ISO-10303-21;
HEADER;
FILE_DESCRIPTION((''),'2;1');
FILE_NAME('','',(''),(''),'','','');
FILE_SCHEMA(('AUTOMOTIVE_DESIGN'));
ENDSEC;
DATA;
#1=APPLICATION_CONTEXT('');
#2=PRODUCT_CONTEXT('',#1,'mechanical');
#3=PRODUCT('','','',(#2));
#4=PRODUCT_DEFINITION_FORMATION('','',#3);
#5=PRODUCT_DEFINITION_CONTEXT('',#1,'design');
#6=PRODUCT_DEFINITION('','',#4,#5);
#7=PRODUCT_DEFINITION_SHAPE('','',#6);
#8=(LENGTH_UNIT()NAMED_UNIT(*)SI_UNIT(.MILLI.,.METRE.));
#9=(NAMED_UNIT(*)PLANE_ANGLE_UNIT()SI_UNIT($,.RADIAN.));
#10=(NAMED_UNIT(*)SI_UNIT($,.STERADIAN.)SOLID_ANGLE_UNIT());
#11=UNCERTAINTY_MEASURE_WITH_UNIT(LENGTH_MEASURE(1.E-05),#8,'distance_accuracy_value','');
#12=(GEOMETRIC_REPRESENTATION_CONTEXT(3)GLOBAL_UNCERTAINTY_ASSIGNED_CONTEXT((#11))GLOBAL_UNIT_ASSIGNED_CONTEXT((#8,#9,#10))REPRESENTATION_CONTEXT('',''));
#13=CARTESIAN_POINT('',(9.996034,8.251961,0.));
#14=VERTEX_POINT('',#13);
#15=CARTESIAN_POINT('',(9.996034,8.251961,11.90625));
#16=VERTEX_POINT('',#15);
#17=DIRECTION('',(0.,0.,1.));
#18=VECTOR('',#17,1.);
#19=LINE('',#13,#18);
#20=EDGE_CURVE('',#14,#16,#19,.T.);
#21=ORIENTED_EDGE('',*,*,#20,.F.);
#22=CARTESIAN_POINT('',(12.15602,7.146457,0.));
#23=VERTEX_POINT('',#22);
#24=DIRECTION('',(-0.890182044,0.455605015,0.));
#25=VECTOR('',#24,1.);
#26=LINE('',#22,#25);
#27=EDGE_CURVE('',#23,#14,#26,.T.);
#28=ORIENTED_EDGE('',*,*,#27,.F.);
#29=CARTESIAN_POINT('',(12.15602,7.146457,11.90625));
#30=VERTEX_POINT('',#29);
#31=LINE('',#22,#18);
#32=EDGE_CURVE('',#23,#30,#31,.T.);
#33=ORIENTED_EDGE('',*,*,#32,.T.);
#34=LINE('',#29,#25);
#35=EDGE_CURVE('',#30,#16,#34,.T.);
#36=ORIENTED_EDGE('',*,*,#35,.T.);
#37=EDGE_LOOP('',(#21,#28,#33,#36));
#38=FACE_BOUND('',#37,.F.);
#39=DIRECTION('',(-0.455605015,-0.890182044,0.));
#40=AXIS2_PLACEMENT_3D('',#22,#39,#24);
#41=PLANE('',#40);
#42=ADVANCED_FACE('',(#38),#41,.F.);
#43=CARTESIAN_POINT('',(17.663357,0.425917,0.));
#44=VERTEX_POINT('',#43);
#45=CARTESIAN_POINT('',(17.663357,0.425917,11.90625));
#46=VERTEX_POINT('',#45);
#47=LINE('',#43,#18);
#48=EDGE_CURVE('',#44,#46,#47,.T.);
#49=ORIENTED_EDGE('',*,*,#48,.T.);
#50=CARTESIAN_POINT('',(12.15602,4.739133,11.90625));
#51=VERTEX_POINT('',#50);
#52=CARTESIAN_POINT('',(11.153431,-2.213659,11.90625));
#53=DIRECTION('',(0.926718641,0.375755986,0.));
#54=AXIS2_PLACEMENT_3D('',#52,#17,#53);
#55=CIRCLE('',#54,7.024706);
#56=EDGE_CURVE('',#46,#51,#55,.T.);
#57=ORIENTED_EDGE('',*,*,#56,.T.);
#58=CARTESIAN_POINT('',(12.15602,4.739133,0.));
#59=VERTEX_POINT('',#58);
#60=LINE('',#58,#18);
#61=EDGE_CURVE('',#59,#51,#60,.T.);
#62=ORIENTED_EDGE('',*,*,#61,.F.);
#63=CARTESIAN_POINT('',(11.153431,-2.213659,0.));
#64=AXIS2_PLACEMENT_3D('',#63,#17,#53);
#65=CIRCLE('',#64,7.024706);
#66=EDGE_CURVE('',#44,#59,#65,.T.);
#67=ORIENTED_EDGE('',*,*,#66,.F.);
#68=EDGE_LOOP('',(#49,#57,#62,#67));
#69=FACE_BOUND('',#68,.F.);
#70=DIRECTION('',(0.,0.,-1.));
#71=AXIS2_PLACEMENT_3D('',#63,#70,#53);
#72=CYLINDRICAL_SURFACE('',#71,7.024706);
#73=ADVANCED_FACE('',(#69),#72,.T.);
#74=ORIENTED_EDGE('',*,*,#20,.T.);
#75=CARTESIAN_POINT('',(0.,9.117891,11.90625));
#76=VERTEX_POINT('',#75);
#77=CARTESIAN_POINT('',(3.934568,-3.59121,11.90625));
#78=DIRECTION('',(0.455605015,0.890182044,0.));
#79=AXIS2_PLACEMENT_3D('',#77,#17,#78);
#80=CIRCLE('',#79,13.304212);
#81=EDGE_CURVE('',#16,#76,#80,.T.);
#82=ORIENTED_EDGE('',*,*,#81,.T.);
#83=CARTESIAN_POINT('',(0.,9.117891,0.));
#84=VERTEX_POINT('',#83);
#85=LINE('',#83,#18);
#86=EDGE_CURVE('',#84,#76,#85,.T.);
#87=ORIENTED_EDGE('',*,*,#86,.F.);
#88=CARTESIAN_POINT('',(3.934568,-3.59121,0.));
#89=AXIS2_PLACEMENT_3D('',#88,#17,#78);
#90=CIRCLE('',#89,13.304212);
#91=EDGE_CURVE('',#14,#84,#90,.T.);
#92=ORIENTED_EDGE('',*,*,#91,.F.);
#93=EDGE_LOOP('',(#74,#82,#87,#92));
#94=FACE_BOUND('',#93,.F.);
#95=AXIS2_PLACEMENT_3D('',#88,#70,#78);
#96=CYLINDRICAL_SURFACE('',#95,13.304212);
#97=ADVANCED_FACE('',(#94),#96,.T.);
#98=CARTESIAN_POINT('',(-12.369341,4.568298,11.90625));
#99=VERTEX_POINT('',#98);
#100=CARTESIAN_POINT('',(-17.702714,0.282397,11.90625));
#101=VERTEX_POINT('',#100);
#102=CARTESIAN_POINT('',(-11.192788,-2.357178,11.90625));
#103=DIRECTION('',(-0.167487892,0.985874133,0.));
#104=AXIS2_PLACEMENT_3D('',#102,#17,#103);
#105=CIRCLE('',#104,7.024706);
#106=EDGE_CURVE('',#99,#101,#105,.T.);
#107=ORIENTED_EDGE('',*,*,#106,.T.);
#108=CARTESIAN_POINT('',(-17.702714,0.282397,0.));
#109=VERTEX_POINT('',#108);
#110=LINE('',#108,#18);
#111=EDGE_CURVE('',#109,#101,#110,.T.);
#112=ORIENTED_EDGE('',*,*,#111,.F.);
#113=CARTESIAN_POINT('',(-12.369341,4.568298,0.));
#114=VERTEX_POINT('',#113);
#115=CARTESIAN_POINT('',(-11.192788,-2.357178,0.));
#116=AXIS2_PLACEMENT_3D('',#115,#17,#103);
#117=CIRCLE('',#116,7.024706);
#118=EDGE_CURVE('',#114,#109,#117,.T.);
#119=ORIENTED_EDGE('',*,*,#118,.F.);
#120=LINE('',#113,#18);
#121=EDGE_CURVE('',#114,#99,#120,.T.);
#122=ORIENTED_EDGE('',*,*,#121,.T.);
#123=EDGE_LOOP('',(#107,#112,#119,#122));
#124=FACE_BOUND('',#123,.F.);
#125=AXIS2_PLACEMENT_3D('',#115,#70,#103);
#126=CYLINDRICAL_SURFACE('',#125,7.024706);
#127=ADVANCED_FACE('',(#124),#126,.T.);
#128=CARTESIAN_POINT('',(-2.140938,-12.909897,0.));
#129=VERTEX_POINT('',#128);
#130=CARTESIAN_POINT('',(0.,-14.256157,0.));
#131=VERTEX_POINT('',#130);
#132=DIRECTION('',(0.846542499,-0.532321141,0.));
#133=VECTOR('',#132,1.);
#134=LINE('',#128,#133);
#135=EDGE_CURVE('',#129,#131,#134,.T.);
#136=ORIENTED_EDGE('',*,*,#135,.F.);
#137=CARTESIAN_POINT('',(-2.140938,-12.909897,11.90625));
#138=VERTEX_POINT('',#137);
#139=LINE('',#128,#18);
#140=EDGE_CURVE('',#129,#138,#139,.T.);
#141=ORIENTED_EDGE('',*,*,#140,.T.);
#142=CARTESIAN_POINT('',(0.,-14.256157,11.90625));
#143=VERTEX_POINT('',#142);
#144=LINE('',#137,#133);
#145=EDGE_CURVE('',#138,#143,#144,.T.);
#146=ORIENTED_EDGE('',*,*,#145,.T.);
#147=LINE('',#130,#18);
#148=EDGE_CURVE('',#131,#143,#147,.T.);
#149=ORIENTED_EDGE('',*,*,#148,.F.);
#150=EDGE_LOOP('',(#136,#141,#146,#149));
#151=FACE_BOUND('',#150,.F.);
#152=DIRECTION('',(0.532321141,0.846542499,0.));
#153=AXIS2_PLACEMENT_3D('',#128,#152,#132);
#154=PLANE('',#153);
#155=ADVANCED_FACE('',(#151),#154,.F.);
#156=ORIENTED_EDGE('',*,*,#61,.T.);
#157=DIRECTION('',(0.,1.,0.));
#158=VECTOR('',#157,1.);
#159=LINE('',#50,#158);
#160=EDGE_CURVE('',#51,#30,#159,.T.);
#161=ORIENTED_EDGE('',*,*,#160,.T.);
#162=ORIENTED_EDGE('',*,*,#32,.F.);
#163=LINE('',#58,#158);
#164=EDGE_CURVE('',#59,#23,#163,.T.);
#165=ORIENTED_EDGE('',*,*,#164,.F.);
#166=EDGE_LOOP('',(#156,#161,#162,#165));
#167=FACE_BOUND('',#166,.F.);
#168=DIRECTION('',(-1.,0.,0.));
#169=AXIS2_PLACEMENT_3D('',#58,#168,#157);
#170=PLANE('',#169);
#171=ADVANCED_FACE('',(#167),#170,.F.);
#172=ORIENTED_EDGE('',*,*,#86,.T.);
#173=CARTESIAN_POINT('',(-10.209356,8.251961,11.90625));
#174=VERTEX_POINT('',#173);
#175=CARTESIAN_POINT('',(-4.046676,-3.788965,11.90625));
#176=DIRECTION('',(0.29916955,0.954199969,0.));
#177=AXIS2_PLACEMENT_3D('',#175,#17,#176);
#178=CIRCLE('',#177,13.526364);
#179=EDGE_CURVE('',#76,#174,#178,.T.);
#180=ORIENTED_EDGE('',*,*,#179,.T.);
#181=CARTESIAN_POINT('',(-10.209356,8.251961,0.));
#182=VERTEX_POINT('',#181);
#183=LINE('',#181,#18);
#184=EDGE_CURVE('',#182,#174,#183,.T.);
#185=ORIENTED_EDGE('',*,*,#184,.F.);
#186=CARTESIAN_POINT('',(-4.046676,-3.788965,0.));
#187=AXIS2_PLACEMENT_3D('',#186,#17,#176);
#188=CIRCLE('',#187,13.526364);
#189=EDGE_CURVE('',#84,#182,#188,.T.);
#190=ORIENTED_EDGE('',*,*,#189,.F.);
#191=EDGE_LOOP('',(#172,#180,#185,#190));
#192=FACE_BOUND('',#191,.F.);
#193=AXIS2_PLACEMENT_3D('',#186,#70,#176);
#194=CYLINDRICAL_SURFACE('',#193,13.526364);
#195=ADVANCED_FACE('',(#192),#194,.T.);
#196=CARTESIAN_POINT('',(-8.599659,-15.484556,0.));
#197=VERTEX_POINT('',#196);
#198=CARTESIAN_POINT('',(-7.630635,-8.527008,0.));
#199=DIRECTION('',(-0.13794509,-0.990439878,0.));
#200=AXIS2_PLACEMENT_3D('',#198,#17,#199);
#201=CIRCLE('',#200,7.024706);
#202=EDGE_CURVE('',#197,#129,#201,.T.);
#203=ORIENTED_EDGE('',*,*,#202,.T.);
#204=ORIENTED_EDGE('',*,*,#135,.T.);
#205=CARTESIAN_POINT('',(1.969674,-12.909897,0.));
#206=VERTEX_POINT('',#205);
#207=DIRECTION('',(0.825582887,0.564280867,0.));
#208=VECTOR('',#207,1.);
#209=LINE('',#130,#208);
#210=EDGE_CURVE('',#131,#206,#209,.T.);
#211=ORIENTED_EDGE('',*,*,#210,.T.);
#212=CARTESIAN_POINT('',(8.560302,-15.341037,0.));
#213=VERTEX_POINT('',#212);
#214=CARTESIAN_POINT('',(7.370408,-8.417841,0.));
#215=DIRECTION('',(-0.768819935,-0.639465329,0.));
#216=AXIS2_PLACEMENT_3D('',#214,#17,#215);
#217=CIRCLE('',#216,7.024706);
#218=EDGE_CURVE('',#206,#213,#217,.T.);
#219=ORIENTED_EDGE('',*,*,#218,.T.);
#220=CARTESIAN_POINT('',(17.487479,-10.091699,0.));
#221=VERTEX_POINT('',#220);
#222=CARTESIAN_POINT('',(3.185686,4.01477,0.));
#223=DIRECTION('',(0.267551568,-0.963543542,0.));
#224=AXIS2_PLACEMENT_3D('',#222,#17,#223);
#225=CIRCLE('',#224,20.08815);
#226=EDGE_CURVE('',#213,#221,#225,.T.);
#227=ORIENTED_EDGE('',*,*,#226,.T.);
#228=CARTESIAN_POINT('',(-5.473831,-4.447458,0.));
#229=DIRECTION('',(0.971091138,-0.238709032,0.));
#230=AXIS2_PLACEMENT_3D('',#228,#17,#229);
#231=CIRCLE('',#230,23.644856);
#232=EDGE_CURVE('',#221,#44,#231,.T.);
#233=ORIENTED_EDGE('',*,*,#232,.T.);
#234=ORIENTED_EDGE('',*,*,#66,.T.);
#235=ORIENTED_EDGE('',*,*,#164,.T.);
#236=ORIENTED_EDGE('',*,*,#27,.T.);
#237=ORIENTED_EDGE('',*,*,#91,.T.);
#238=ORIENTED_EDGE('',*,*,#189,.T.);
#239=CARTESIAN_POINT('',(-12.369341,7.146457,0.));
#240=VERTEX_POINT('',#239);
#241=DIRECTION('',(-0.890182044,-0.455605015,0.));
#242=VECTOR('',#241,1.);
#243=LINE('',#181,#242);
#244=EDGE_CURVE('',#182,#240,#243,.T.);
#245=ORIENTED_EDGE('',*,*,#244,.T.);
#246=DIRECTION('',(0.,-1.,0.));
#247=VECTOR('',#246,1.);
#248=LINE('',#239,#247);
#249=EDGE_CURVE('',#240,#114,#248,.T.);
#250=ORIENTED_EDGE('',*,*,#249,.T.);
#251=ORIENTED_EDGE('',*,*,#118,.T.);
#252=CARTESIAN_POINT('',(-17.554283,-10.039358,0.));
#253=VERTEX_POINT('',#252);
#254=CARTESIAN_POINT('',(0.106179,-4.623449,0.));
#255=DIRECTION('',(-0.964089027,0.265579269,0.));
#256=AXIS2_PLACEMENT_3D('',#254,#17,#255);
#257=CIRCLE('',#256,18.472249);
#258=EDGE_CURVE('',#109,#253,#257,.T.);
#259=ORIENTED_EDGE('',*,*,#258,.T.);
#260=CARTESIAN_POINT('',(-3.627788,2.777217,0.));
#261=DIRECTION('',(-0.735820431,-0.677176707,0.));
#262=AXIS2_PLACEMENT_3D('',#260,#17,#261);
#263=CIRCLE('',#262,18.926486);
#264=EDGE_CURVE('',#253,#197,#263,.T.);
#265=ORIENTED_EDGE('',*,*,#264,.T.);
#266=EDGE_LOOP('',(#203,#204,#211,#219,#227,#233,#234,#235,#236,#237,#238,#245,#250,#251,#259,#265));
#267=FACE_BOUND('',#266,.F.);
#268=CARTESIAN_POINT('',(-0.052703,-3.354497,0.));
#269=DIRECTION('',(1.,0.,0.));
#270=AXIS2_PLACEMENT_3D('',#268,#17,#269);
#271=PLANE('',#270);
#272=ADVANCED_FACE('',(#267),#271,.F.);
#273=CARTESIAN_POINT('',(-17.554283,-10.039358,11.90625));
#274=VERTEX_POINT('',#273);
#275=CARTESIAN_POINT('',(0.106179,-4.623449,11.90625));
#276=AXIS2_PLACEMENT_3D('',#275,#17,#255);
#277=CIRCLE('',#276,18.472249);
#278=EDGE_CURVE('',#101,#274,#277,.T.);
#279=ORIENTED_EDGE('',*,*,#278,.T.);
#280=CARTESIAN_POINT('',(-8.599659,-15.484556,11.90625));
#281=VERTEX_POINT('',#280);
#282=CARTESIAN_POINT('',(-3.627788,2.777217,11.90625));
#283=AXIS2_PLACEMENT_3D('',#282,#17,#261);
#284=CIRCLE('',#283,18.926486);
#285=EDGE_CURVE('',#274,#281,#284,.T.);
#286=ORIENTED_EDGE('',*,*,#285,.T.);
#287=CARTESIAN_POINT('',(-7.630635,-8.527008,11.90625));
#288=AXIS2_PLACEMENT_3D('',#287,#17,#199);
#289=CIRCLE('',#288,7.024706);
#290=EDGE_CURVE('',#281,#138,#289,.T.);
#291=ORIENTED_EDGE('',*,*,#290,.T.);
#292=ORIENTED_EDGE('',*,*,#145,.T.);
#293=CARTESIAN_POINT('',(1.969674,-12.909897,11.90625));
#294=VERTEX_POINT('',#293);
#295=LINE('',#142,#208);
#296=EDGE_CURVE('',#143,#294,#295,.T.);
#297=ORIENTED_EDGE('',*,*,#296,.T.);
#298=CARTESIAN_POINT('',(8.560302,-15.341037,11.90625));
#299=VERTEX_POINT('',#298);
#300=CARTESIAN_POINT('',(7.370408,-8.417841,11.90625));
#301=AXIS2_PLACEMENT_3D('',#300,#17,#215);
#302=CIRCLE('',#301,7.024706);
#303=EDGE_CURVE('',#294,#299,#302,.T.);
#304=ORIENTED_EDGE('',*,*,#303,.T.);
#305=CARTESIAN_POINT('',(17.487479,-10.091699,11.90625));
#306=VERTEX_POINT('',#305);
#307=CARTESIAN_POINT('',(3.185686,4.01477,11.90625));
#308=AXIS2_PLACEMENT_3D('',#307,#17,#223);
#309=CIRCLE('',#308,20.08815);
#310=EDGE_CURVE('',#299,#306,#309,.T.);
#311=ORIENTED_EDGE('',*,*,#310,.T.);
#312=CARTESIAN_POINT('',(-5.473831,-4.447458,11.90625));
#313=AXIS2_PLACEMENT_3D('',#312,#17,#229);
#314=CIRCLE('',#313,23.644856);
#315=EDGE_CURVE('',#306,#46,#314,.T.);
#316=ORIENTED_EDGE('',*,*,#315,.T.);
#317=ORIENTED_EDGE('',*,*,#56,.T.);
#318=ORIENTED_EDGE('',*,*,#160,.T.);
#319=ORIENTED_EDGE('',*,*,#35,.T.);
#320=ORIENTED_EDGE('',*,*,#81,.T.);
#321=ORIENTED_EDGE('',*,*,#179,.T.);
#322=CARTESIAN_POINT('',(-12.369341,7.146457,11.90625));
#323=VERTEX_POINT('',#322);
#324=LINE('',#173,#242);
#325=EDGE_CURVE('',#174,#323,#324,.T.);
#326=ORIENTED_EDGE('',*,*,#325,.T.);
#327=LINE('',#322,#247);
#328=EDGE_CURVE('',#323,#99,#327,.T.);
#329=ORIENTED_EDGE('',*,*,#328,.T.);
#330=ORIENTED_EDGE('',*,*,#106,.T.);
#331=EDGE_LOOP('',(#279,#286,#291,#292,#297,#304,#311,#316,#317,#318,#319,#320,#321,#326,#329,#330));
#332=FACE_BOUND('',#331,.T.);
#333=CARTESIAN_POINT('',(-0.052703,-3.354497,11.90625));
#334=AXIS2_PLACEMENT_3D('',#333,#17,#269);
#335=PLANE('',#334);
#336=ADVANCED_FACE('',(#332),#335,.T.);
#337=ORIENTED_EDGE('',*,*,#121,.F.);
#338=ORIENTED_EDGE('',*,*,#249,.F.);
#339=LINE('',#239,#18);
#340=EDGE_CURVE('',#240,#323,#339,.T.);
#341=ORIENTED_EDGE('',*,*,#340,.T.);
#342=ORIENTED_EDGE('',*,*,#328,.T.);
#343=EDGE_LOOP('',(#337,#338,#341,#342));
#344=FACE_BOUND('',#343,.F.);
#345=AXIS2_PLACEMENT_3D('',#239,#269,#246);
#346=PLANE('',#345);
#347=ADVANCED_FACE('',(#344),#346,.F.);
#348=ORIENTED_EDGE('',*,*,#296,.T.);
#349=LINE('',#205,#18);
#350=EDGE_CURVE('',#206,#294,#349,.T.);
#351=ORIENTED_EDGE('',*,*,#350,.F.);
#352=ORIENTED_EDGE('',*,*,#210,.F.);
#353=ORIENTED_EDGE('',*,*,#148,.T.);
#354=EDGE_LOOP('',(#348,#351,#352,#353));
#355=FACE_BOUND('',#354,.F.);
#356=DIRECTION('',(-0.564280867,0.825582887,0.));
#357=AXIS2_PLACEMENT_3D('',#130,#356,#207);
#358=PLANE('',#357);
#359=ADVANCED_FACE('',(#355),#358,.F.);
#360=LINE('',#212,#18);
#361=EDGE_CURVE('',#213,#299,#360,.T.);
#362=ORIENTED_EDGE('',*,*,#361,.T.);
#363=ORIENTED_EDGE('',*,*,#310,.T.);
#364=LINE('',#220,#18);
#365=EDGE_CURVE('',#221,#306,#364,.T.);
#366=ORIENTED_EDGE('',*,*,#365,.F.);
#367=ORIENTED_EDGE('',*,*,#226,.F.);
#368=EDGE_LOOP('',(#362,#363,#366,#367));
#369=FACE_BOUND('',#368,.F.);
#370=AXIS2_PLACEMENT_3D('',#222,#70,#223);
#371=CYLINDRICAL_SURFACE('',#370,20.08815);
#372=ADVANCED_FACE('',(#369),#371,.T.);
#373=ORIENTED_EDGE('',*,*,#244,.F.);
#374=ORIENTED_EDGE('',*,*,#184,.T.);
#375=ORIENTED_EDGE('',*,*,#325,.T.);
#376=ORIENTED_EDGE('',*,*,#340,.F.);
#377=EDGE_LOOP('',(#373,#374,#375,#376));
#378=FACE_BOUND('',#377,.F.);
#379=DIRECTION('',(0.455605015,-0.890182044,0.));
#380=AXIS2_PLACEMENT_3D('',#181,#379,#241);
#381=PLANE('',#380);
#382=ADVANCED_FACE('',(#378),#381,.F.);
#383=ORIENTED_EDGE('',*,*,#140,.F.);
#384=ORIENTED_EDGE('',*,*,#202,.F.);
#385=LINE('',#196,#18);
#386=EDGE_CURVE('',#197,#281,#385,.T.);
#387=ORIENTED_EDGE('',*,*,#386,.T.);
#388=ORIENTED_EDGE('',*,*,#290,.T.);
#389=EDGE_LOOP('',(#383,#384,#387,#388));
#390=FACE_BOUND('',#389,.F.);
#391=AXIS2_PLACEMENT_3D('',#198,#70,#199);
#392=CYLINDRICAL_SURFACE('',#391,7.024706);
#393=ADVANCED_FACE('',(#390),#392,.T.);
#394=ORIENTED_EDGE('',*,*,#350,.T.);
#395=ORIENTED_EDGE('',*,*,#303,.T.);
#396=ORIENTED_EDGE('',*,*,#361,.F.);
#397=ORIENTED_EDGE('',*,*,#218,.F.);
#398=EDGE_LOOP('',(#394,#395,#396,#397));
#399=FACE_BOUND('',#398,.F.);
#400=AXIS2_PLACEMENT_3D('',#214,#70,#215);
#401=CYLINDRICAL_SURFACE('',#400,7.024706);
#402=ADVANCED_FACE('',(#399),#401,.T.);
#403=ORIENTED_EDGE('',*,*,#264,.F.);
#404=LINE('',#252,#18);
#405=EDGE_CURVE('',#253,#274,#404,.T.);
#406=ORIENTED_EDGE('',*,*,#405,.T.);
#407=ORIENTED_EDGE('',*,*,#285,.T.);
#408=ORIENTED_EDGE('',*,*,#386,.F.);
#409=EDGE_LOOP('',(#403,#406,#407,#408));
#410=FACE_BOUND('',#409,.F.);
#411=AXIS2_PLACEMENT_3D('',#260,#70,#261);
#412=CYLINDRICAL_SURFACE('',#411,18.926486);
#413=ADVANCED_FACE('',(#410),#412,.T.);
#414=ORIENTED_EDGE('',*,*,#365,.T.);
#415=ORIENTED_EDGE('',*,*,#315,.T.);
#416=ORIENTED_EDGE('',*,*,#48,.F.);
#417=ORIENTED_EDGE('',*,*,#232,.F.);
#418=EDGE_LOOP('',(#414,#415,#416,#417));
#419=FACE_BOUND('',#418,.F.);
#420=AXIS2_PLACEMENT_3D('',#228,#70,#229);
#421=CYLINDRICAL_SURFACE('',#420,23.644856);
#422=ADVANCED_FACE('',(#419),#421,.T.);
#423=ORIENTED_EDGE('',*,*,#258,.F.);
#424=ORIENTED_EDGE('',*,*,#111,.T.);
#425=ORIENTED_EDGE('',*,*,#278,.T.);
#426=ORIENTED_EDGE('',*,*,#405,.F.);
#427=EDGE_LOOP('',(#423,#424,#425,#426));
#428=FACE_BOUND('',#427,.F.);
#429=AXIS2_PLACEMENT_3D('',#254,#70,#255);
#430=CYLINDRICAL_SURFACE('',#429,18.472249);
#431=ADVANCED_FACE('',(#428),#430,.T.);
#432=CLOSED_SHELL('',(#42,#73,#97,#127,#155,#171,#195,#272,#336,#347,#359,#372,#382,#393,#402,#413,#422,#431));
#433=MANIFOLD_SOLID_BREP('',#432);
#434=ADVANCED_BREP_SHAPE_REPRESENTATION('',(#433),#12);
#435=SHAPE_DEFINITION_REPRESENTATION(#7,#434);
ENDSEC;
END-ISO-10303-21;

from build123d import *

# Parameters (mm, degrees)
F1_DEPTH = 11.90625


# Not quite as in the source:
# - a length typed as a fraction of an inch, garbled in the dataset ("3 / 203.2 mm" for 3/8 in), is restored


with BuildPart() as f1:
    # F0 (on Top) → F1 (new body)
    with BuildSketch(Plane.XY):
        with BuildLine():
            ThreePointArc((0, 9.1178910807), (-5.1898410508, 9.6890057882), (-10.2093555033, 8.2519613206))
            Line((-10.2093555033, 8.2519613206), (-12.369341217, 7.1464567445))
            Line((-12.369341217, 7.1464567445), (-12.369341217, 4.6386048198))
            Line((-12.369341217, 4.6386048198), (-12.369341217, 4.5682978211))
            ThreePointArc((-12.369341217, 4.5682978211), (-15.5930977879, 3.1185654947), (-17.7027139134, 0.2823972963))
            ThreePointArc((-17.7027139134, 0.2823972963), (-18.3641606661, -4.889059653), (-17.5542831421, -10.0393583998))
            ThreePointArc((-17.5542831421, -10.0393583998), (-13.4613837791, -13.3941238354), (-8.5996589687, -15.484556372))
            ThreePointArc((-8.5996589687, -15.484556372), (-5.0294162563, -15.0523544446), (-2.1409380715, -12.9098966718))
            Line((-2.1409380715, -12.9098966718), (0, -14.2561570176))
            Line((0, -14.2561570176), (1.9696742658, -12.9098966718))
            ThreePointArc((1.9696742658, -12.9098966718), (4.9392756736, -15.0084468105), (8.560301624, -15.3410370587))
            ThreePointArc((8.560301624, -15.3410370587), (13.367982191, -13.3015402533), (17.4874793738, -10.0916987285))
            ThreePointArc((17.4874793738, -10.0916987285), (18.16772005, -4.8427956267), (17.6633565687, 0.4259166096))
            ThreePointArc((17.6633565687, 0.4259166096), (15.4847616458, 3.3168082822), (12.1560195839, 4.739132713))
            Line((12.1560195839, 4.739132713), (12.1560195839, 7.1464567445))
            Line((12.1560195839, 7.1464567445), (9.9960338703, 8.2519613206))
            ThreePointArc((9.9960338703, 8.2519613206), (5.0827762692, 9.6633625741), (0, 9.1178910807))
        make_face()
    extrude(amount=F1_DEPTH)


solid = f1.part
